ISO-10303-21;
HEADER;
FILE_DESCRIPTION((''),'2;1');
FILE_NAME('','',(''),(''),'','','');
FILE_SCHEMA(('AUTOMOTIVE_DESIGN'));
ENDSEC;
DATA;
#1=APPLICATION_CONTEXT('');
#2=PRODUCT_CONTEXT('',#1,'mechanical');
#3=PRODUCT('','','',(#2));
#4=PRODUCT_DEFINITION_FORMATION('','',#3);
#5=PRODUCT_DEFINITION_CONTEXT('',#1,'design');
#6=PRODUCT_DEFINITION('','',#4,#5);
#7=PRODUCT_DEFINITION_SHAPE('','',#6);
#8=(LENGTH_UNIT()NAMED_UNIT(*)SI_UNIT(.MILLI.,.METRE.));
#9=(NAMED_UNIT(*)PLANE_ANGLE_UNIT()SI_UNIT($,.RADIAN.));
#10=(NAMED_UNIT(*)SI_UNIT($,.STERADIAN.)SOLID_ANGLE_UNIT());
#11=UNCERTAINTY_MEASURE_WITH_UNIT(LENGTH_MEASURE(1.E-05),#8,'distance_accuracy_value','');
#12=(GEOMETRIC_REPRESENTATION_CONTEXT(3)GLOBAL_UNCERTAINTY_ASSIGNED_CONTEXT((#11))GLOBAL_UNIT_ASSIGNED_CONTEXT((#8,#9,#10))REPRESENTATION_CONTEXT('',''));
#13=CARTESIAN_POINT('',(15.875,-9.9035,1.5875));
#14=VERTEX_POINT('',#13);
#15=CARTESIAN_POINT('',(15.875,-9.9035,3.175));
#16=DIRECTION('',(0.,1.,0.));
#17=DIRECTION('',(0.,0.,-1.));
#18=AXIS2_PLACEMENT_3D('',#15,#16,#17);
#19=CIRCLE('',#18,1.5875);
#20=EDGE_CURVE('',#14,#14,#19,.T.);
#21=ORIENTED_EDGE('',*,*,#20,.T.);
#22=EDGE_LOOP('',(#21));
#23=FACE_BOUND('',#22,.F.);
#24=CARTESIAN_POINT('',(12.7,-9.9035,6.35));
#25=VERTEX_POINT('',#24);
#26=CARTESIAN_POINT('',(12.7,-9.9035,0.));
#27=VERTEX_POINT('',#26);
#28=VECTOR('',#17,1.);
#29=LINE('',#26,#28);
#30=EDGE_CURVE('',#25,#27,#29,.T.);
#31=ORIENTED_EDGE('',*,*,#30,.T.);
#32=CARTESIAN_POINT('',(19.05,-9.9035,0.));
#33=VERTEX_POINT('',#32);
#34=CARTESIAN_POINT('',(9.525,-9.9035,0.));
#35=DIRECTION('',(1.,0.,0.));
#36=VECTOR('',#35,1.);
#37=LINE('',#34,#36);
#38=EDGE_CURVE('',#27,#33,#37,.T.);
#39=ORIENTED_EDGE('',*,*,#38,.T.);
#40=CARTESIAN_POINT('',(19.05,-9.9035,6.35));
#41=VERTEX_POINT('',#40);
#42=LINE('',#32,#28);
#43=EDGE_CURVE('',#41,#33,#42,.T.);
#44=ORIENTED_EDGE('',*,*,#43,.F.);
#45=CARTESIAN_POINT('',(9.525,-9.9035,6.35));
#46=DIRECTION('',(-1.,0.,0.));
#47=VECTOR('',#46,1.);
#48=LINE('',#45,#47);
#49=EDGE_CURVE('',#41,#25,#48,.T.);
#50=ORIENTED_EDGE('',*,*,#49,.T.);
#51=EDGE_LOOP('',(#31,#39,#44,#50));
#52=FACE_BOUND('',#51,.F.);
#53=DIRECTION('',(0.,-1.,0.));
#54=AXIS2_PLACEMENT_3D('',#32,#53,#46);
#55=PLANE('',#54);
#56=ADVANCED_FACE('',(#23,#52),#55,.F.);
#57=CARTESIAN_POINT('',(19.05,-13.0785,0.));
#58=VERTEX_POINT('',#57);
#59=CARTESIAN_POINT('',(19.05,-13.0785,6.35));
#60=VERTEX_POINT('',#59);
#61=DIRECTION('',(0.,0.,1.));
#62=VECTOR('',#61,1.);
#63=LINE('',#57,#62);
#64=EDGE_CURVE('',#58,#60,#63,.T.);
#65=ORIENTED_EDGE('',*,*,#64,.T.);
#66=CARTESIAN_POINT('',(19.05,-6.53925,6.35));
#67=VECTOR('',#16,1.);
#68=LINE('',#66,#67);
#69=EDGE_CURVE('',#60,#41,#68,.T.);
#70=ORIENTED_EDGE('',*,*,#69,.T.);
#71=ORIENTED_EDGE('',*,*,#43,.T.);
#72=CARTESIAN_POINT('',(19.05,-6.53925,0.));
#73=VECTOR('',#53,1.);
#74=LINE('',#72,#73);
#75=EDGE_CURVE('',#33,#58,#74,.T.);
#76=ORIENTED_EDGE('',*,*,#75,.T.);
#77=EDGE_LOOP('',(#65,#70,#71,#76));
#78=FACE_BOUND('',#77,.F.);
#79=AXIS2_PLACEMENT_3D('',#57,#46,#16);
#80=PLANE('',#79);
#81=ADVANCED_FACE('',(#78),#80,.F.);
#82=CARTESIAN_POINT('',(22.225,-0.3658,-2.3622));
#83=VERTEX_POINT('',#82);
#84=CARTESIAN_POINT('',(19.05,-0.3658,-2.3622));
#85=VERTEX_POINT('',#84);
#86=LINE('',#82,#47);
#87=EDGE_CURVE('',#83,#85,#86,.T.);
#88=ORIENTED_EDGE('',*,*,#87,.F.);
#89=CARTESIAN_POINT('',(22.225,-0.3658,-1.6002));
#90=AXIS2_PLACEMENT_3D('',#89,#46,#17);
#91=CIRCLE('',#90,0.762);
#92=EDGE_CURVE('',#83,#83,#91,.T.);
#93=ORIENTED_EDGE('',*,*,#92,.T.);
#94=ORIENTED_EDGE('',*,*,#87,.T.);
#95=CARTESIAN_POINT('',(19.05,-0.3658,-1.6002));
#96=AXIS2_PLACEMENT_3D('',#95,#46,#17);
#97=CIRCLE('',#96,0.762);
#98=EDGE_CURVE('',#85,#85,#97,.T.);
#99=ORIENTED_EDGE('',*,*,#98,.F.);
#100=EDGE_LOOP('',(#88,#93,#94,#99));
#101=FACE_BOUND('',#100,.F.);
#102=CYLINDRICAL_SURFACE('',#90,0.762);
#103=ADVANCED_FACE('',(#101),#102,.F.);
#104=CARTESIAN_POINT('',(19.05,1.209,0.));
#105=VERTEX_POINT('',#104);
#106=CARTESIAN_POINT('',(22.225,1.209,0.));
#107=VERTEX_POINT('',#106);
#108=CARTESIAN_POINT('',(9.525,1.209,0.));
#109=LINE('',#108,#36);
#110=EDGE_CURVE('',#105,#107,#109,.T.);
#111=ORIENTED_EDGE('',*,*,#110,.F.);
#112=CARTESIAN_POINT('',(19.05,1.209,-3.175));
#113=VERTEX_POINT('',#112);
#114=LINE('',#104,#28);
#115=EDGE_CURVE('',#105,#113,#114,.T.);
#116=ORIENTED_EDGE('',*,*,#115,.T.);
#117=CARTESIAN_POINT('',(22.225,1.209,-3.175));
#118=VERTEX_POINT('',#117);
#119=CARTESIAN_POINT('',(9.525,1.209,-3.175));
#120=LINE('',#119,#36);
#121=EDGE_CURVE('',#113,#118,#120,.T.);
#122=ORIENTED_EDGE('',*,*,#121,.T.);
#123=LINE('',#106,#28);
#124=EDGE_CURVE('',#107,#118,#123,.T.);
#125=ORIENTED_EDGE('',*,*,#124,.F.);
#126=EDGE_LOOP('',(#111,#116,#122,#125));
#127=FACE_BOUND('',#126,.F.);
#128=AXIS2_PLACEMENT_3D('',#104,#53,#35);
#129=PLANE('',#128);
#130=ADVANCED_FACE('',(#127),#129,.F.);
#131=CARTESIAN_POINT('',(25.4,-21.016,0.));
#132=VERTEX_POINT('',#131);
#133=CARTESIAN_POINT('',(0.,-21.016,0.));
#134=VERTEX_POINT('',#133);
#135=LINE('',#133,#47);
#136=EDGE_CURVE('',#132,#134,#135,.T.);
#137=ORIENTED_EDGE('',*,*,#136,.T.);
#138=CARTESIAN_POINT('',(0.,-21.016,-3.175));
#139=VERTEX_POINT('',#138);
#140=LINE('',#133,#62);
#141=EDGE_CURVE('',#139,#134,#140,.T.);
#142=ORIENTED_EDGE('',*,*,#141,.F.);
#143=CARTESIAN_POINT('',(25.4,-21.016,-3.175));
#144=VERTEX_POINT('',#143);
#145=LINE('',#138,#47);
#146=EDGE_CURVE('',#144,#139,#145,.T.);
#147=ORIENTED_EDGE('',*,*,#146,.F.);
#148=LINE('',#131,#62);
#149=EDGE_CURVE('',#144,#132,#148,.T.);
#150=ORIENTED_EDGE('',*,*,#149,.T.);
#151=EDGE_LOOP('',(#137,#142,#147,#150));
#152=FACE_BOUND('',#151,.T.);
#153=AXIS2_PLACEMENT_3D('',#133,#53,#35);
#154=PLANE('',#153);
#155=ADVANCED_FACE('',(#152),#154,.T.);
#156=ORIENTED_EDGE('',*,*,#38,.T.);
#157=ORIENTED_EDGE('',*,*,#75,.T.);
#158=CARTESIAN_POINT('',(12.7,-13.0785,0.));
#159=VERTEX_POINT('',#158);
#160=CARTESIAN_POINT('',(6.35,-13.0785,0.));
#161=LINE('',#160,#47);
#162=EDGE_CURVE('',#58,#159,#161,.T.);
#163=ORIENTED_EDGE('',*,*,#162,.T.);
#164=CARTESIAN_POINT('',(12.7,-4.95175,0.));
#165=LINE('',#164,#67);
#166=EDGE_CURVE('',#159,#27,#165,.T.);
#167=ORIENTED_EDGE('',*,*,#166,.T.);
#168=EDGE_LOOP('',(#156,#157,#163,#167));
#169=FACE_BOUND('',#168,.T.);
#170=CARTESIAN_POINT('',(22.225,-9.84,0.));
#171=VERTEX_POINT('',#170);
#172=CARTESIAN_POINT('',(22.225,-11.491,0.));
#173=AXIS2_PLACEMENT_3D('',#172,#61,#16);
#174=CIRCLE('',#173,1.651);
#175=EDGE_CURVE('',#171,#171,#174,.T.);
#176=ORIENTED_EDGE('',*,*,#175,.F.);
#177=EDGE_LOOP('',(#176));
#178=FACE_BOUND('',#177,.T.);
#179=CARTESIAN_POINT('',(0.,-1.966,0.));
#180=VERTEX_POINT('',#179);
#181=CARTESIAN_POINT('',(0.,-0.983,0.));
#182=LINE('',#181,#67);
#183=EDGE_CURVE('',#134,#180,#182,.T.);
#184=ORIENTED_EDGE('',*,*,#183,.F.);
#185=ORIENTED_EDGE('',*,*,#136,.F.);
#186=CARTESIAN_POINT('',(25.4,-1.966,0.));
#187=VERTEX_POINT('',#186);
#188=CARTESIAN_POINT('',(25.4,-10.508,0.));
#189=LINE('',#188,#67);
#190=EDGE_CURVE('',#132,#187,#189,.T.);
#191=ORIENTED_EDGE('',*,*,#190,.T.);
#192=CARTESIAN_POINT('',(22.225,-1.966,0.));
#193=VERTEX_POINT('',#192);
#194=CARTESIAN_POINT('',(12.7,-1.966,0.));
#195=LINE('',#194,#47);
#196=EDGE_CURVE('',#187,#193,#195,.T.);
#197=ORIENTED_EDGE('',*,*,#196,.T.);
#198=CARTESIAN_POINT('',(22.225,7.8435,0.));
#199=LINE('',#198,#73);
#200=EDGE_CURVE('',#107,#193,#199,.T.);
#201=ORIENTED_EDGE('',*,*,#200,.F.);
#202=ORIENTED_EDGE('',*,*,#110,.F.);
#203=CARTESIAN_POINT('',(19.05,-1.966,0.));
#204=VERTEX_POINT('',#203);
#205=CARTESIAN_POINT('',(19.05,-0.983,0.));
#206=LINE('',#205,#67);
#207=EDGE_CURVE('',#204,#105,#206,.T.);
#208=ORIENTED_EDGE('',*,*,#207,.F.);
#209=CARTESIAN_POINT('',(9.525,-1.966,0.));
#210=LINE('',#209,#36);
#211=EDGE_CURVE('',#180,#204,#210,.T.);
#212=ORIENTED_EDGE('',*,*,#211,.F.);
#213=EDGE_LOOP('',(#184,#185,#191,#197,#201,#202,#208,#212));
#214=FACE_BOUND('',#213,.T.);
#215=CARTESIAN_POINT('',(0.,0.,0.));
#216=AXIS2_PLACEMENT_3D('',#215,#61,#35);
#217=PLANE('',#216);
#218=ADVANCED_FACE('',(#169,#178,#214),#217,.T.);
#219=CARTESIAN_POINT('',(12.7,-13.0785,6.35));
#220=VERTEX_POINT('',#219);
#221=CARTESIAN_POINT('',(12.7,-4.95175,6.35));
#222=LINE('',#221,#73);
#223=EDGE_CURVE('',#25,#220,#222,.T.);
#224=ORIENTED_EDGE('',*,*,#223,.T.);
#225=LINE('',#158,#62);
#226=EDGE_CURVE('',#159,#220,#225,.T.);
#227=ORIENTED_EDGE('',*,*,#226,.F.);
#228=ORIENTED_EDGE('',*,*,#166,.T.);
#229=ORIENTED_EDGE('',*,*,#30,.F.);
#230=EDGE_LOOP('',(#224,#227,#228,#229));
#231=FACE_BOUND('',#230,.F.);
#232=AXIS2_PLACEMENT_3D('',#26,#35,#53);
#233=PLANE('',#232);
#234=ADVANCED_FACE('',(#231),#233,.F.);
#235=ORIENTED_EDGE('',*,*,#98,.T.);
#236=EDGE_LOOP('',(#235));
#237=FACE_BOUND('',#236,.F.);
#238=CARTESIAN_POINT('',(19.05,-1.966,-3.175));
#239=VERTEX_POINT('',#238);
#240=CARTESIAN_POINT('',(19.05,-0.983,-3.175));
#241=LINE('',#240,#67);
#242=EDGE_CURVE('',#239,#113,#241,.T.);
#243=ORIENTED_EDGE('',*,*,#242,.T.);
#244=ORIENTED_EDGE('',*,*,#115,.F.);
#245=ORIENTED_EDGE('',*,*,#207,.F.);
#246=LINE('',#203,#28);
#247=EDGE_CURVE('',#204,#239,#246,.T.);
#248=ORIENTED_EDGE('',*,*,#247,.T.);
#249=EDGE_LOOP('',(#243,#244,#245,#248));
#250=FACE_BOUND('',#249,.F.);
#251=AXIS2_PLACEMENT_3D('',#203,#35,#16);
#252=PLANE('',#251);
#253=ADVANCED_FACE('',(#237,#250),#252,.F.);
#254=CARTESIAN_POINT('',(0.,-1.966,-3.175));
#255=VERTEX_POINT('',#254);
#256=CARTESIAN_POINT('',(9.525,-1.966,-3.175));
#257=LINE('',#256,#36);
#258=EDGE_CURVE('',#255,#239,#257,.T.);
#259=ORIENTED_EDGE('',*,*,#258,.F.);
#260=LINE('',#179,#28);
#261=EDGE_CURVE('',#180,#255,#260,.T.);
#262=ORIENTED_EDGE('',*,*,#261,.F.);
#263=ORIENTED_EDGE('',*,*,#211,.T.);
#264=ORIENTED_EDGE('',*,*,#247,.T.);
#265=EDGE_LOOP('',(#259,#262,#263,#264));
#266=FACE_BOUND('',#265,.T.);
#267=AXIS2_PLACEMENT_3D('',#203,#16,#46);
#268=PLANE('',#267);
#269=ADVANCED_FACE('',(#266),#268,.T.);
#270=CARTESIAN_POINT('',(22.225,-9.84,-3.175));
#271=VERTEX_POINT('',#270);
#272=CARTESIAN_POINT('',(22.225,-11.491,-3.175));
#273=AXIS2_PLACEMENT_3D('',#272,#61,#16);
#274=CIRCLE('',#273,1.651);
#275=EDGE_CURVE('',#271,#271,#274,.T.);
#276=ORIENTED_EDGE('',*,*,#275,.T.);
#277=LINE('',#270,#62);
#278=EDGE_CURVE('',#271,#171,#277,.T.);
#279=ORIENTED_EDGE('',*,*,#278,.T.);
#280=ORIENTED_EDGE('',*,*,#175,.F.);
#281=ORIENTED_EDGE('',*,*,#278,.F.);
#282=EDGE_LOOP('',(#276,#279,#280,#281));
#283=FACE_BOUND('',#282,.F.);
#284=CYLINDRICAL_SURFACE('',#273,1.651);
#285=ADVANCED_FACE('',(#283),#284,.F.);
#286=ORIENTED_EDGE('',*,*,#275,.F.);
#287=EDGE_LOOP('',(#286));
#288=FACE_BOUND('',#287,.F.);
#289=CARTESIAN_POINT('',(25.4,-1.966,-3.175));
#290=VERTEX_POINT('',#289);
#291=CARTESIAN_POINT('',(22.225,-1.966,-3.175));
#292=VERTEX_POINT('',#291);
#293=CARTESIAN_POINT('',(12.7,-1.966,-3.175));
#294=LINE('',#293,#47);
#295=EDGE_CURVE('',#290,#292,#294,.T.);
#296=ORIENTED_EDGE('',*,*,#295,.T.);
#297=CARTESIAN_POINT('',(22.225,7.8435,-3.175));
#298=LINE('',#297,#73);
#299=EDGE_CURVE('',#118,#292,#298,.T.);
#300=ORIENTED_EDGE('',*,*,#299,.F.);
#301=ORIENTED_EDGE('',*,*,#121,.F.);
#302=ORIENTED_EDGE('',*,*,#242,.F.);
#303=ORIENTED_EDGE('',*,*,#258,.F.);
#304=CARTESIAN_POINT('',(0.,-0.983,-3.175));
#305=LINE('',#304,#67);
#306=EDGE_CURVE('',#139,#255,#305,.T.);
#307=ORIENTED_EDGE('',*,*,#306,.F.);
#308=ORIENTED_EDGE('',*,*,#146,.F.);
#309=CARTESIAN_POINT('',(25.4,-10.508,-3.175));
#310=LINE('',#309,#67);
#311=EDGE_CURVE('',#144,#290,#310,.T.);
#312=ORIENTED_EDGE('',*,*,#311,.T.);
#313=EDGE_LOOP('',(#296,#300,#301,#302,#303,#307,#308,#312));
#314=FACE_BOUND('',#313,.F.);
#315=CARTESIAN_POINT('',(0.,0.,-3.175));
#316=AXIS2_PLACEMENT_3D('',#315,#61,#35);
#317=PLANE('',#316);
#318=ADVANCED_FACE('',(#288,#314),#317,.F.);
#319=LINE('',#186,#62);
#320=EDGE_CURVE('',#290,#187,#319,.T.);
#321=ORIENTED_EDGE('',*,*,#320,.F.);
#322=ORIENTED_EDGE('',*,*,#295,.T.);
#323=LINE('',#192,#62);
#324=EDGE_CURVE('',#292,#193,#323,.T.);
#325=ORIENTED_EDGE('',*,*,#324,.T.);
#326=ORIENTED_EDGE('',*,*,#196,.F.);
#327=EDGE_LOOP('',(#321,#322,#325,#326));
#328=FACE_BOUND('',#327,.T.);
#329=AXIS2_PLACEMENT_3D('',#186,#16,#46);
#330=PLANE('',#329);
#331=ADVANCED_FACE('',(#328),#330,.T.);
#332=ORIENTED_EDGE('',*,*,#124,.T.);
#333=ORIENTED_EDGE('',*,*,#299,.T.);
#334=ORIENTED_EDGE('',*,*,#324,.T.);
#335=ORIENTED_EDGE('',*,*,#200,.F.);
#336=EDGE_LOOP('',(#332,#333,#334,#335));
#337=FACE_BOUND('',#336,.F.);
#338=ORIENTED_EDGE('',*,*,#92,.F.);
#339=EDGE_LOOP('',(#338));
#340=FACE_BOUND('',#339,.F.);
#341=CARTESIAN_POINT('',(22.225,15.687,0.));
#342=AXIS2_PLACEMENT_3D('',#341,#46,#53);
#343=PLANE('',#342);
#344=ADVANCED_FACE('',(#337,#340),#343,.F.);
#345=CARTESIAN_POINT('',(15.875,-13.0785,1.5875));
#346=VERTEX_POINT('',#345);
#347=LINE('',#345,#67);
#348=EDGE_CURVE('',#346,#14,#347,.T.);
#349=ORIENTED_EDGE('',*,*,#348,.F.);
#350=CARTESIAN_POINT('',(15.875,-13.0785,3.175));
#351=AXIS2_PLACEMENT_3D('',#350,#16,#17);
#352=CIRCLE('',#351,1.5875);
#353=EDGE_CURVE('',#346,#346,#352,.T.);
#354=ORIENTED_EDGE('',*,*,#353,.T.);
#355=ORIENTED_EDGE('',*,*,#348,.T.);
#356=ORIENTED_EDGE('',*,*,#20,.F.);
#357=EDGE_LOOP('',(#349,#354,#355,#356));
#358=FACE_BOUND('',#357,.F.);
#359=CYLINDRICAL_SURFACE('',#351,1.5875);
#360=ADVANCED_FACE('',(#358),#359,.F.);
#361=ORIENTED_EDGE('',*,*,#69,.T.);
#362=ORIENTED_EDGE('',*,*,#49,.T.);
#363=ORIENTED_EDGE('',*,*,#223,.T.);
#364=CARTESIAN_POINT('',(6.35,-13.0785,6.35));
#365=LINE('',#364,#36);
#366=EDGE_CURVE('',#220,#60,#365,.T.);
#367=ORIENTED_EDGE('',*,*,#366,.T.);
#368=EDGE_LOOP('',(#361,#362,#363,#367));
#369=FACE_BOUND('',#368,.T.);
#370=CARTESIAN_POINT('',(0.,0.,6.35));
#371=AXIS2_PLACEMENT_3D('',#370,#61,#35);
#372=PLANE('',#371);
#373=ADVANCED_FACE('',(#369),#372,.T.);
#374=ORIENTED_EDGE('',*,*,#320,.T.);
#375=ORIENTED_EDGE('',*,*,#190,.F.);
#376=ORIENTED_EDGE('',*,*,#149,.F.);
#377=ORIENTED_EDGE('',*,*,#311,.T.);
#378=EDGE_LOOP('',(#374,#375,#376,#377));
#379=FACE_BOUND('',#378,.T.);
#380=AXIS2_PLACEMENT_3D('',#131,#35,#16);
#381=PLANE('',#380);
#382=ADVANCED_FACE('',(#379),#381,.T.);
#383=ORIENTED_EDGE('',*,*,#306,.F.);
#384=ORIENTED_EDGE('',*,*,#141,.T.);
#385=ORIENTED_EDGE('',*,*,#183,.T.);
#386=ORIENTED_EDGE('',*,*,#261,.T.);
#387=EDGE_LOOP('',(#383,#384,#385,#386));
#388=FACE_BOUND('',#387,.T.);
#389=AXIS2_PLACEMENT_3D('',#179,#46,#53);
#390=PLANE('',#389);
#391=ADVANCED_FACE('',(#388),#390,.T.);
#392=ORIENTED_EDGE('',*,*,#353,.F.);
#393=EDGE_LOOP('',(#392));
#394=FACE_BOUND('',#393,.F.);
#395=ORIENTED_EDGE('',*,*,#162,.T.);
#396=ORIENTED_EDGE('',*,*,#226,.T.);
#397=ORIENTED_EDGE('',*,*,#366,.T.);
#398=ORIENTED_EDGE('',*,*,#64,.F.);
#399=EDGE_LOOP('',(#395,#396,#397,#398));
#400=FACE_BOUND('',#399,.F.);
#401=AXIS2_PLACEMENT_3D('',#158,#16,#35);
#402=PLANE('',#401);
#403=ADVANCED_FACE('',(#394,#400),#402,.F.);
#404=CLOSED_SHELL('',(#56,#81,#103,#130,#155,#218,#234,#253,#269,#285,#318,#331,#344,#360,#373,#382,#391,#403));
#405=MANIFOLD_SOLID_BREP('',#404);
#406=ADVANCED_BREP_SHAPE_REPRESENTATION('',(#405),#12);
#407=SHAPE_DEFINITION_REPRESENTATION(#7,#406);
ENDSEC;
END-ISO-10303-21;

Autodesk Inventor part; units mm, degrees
ref_plane "YZ Plane" through (0, 0, 0) normal (1, 0, 0) x (0, 1, 0)
ref_plane "XZ Plane" through (0, 0, 0) normal (0, 1, 0) x (-1, 0, 0)
ref_plane "XY Plane" through (0, 0, 0) normal (0, 0, 1) x (1, 0, 0)
sketch "Sketch1" plane through (0, 0, 0) normal (0, 0, 1) x (1, 0, 0)
  line L0 (0, -21.016) -> (25.4, -21.016)
  line L1 (25.4, -21.016) -> (25.4, -1.966)
  line L2 (0, -1.966) -> (0, -21.016)
  line L3 (19.05, -1.966) -> (19.05, 15.687)
  line L4 (19.05, 15.687) -> (22.225, 15.687)
  line L5 (22.225, 15.687) -> (22.225, -1.966)
  line L6 (25.4, -1.966) -> (22.225, -1.966)
  line L7 (19.05, -1.966) -> (0, -1.966)
  dimension "d0" = 19.05
  dimension "d2" = 25.4
  dimension "d3" = 3.175
  dimension "d4" = 17.653
  dimension "d22" = 3.175
extrude "Extrusion1" add sketch "Sketch1" against normal blind 3.175
sketch "Sketch2" plane through (0, 0, 0) normal (0, 0, 1) x (1, 0, 0)
  line L0 (12.7, -13.0785) -> (19.05, -13.0785)
  line L1 (19.05, -13.0785) -> (19.05, -9.9035)
  line L2 (19.05, -9.9035) -> (12.7, -9.9035)
  line L3 (12.7, -9.9035) -> (12.7, -13.0785)
  line L4 (0, -1.966) -> (0, -21.016) projected
  line L5 (25.4, -1.966) -> (22.225, -1.966) projected
  line L6 (25.4, -21.016) -> (25.4, -1.966) projected
  dimension "d7" = 3.175
  dimension "d10" = 6.35
  dimension "d11" = 7.9375
  dimension "d12" = 6.35
extrude "Extrusion2" add sketch "Sketch2" along normal blind 6.35
sketch "Sketch3" plane through (22.225, -1.966, 0) normal (1, 0, 0) x (0, 0, -1)
  line L0 (0, 0) -> (0, 17.653) projected
  line L1 (0, 0) -> (3.175, 0) projected
  line L2 (3.175, 17.653) -> (3.175, 0) projected
  line L3 (0, 17.653) -> (3.175, 17.653) projected
  point P0 (1.5537, 16.0528)
  dimension "d38" = 1.6002
hole "Hole1" at (22.225, 14.0868, -1.5537) direction (-1, 0, 0) diameter 1.524 end through all
sketch "Sketch4" plane through (12.7, -13.0785, 0) normal (0, -1, 0) x (1, 0, 0)
  line L0 (6.35, 0) -> (0, 0) projected
  line L1 (6.35, 0) -> (6.35, 6.35) projected
  line L2 (0, 6.35) -> (6.35, 6.35) projected
  line L3 (0, 0) -> (0, 6.35) projected
  point P0 (3.175, 3.175)
hole "Hole2" at (15.875, -13.0785, 3.175) direction (0, 1, 0) diameter 3.175 end through all
sketch "Sketch5" plane through (0, 0, -3.175) normal (0, 0, -1) x (-1, 0, 0)
  line L0 (-25.4, -21.016) -> (0, -21.016) projected
  line L1 (0, -21.016) -> (0, -1.966) projected
  line L2 (0, -1.966) -> (-19.05, -1.966) projected
  line L3 (-19.05, -1.966) -> (-19.05, 15.687) projected
  line L4 (-19.05, 15.687) -> (-22.225, 15.687) projected
  line L5 (-22.225, 15.687) -> (-22.225, -1.966) projected
  line L6 (-22.225, -1.966) -> (-25.4, -1.966) projected
  line L7 (-25.4, -1.966) -> (-25.4, -21.016) projected
  point P0 (-22.225, -11.491)
  point P1 (-5.3321, 2.987)
  dimension "d37" = 3.175
hole "Hole3" at (5.3321, 2.987, -3.175) at (22.225, -11.491, -3.175) direction (0, 0, 1) diameter 3.302 end through all thread size "8-32 UNC" class "2B" standard "ANSI Unified Screw Threads"
sketch "Sketch6" plane through (22.225, -1.966, 0) normal (1, 0, 0) x (0, 0, -1)
  point P0 (0, 1.966)
hole "Hole4" at (22.225, -0.3658, -1.6002) direction (-1, 0, 0) diameter 1.524 end through all
thicken "Thicken1" operation add thickness 14.478 both sides no extend neighbours yes toward (0, -1, 0) faces at (21.1667, 15.687, -1.0583)
equation "\"d11\" = -0.5 * d7 + 0.5 * d0"
properties part number "slide pivot plate"
